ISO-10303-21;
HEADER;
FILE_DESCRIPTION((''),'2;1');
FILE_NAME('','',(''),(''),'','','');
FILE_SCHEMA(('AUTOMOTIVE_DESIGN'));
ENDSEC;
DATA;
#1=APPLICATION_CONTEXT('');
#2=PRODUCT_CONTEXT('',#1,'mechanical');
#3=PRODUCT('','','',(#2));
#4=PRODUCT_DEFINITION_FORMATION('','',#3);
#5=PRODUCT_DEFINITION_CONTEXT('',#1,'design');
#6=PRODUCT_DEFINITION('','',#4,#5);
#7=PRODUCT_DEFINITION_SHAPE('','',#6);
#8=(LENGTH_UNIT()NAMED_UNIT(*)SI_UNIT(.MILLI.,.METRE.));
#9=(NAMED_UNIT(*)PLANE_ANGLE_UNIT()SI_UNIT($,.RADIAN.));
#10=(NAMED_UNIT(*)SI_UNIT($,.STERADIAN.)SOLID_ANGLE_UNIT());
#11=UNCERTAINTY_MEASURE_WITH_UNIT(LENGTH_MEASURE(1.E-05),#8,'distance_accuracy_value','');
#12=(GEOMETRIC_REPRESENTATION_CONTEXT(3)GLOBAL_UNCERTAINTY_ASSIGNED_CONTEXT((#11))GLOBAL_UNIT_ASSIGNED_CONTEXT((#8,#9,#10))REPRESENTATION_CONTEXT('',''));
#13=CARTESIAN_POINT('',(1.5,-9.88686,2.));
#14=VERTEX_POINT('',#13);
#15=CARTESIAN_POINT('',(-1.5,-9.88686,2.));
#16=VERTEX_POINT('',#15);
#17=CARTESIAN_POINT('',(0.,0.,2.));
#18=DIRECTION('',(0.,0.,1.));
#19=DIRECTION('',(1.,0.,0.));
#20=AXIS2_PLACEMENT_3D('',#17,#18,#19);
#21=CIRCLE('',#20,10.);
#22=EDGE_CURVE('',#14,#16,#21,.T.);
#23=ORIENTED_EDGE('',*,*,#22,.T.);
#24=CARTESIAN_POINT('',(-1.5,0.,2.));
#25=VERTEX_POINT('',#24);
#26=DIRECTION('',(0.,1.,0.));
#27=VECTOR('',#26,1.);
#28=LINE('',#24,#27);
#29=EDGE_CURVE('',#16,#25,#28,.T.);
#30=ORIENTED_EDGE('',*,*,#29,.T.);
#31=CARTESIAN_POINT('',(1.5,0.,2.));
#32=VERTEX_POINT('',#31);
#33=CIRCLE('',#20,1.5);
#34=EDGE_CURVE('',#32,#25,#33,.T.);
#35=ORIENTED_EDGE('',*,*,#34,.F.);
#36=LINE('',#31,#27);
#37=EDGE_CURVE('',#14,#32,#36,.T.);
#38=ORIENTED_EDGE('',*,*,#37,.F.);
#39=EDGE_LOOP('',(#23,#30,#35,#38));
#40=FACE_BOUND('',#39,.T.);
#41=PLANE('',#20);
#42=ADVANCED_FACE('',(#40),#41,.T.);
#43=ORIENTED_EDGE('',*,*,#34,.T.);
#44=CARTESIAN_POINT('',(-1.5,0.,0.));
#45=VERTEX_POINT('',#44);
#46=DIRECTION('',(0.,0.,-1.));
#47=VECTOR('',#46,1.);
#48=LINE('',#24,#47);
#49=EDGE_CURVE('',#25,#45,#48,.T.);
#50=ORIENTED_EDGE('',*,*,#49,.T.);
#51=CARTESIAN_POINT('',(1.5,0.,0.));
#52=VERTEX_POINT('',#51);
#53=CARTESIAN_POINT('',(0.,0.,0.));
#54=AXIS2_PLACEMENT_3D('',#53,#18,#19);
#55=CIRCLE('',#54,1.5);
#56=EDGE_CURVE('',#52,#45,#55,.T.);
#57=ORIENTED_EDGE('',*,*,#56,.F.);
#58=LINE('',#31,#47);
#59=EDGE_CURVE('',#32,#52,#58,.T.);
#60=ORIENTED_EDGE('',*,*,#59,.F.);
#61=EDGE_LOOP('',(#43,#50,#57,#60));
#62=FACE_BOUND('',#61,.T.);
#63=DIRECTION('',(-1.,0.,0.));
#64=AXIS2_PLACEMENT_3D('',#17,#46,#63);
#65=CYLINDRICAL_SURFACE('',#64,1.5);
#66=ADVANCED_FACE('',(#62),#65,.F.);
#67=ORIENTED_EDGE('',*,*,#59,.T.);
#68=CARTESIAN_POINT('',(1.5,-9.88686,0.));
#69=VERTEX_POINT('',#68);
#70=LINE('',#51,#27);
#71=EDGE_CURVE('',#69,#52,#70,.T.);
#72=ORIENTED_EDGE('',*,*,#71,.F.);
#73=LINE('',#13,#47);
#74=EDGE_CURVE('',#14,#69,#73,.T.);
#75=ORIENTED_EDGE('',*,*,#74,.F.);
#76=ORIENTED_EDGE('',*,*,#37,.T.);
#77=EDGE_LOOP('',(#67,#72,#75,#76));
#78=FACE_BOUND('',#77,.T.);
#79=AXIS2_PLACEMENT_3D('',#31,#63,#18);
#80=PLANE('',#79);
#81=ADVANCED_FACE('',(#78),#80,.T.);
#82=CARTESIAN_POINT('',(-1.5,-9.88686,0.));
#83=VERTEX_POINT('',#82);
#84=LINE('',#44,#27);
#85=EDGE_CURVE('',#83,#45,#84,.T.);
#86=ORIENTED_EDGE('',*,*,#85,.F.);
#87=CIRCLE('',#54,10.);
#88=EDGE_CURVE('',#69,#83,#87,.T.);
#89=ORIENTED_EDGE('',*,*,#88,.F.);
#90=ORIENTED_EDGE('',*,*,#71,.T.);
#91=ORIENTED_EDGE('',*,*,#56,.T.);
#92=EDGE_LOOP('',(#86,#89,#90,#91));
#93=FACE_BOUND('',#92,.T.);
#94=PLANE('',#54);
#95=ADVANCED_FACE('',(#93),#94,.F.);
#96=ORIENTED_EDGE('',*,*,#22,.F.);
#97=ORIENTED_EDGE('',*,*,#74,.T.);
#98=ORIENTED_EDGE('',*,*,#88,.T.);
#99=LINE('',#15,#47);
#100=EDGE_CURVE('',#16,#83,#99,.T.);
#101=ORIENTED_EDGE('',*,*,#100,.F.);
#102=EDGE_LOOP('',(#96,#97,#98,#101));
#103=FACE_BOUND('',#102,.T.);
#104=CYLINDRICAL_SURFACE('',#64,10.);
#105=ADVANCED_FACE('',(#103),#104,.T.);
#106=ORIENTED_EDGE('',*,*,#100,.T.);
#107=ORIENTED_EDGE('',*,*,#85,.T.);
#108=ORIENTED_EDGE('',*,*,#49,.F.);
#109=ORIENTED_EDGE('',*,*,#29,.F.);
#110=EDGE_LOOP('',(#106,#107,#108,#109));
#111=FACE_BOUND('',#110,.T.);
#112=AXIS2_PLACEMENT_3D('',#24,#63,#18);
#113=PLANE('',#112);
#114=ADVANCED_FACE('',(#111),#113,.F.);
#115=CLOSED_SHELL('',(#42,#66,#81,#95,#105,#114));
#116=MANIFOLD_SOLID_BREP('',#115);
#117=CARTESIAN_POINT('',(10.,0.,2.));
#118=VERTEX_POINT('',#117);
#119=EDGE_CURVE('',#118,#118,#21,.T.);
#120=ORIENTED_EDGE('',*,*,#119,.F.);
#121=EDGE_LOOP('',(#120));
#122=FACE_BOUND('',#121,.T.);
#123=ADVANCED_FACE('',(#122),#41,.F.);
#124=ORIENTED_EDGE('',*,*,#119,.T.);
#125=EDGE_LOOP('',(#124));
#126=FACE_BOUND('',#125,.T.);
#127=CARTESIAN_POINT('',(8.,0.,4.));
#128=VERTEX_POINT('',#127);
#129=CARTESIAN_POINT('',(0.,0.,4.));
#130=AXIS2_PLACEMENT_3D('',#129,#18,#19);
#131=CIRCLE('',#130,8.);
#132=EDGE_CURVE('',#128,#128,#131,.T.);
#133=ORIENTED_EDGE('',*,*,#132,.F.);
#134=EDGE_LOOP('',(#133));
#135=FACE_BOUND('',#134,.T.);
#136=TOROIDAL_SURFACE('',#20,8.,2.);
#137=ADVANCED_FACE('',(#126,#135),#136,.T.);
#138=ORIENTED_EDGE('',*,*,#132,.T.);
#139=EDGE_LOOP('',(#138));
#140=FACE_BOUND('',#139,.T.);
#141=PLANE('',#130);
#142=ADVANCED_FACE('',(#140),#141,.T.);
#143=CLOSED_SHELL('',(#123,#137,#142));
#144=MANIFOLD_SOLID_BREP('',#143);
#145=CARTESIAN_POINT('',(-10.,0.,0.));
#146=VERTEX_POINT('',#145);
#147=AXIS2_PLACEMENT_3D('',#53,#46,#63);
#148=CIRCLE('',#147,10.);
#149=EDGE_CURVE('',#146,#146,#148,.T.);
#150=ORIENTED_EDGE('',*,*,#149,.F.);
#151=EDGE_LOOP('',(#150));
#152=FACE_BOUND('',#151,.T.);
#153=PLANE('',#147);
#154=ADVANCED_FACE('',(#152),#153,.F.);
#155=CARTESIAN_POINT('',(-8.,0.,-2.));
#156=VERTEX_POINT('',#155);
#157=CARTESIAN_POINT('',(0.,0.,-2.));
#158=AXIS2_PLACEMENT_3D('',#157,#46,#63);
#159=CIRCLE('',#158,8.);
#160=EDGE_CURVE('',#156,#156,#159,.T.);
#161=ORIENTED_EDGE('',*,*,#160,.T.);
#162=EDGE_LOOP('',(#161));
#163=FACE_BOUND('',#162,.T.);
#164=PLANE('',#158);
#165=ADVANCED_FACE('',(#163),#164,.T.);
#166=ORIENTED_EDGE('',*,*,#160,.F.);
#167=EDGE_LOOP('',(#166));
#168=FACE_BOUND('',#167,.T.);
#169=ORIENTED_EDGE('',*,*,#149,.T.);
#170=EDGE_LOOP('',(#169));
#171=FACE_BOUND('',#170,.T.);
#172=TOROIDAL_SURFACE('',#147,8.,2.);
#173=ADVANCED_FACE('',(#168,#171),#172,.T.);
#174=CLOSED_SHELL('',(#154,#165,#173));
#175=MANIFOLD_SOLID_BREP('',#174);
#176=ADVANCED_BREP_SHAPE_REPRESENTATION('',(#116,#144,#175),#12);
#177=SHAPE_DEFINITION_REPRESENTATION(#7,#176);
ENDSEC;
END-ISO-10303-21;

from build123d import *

# Parameters (mm, degrees)
BOSS_EXTRUDE1_DEPTH = 2
SKETCH2_R           = 10
BOSS_EXTRUDE2_DEPTH = 2
SKETCH3_R           = 10
BOSS_EXTRUDE3_DEPTH = 2
FILLET2_R           = 2
FILLET3_R           = 2


with BuildPart() as part:
    # Sketch1 → Boss-Extrude1 (new body)
    with BuildSketch(Plane.XY):
        with BuildLine():
            ThreePointArc((10, 0), (-6.519202405, 7.582875444), (-1.5, -9.886859967))
            Line((-1.5, -9.886859967), (-1.5, 0))
            ThreePointArc((-1.5, 0), (0, 1.5), (1.5, 0))
            Line((1.5, 0), (1.5, -9.886859967))
            ThreePointArc((1.5, -9.886859967), (7.582875444, -6.519202405), (10, 0))
        make_face()
    extrude(amount=BOSS_EXTRUDE1_DEPTH)


with BuildPart() as body_2:
    # Sketch2 → Boss-Extrude2 (new body)
    with BuildSketch(Plane.XY.offset(2)):
        Circle(SKETCH2_R)
    extrude(amount=BOSS_EXTRUDE2_DEPTH)

    # Fillet3
    fillet3_edges = [body_2.edges().sort_by_distance(p)[0] for p in [
        (-10, 0, 4),
    ]]
    fillet(fillet3_edges, radius=FILLET3_R - 0.0001)  # a hair under: the kernel refuses the full size


with BuildPart() as body_3:
    # Sketch3 → Boss-Extrude3 (new body)
    with BuildSketch(Plane(origin=(0, 0, 0), x_dir=(-1, 0, 0), z_dir=(0, 0, -1))):
        Circle(SKETCH3_R)
    extrude(amount=BOSS_EXTRUDE3_DEPTH)

    # Fillet2
    fillet2_edges = [body_3.edges().sort_by_distance(p)[0] for p in [
        (10, 0, -2),
    ]]
    fillet(fillet2_edges, radius=FILLET2_R - 0.0001)  # a hair under: the kernel refuses the full size


solid = Compound([part.part, body_2.part, body_3.part])
